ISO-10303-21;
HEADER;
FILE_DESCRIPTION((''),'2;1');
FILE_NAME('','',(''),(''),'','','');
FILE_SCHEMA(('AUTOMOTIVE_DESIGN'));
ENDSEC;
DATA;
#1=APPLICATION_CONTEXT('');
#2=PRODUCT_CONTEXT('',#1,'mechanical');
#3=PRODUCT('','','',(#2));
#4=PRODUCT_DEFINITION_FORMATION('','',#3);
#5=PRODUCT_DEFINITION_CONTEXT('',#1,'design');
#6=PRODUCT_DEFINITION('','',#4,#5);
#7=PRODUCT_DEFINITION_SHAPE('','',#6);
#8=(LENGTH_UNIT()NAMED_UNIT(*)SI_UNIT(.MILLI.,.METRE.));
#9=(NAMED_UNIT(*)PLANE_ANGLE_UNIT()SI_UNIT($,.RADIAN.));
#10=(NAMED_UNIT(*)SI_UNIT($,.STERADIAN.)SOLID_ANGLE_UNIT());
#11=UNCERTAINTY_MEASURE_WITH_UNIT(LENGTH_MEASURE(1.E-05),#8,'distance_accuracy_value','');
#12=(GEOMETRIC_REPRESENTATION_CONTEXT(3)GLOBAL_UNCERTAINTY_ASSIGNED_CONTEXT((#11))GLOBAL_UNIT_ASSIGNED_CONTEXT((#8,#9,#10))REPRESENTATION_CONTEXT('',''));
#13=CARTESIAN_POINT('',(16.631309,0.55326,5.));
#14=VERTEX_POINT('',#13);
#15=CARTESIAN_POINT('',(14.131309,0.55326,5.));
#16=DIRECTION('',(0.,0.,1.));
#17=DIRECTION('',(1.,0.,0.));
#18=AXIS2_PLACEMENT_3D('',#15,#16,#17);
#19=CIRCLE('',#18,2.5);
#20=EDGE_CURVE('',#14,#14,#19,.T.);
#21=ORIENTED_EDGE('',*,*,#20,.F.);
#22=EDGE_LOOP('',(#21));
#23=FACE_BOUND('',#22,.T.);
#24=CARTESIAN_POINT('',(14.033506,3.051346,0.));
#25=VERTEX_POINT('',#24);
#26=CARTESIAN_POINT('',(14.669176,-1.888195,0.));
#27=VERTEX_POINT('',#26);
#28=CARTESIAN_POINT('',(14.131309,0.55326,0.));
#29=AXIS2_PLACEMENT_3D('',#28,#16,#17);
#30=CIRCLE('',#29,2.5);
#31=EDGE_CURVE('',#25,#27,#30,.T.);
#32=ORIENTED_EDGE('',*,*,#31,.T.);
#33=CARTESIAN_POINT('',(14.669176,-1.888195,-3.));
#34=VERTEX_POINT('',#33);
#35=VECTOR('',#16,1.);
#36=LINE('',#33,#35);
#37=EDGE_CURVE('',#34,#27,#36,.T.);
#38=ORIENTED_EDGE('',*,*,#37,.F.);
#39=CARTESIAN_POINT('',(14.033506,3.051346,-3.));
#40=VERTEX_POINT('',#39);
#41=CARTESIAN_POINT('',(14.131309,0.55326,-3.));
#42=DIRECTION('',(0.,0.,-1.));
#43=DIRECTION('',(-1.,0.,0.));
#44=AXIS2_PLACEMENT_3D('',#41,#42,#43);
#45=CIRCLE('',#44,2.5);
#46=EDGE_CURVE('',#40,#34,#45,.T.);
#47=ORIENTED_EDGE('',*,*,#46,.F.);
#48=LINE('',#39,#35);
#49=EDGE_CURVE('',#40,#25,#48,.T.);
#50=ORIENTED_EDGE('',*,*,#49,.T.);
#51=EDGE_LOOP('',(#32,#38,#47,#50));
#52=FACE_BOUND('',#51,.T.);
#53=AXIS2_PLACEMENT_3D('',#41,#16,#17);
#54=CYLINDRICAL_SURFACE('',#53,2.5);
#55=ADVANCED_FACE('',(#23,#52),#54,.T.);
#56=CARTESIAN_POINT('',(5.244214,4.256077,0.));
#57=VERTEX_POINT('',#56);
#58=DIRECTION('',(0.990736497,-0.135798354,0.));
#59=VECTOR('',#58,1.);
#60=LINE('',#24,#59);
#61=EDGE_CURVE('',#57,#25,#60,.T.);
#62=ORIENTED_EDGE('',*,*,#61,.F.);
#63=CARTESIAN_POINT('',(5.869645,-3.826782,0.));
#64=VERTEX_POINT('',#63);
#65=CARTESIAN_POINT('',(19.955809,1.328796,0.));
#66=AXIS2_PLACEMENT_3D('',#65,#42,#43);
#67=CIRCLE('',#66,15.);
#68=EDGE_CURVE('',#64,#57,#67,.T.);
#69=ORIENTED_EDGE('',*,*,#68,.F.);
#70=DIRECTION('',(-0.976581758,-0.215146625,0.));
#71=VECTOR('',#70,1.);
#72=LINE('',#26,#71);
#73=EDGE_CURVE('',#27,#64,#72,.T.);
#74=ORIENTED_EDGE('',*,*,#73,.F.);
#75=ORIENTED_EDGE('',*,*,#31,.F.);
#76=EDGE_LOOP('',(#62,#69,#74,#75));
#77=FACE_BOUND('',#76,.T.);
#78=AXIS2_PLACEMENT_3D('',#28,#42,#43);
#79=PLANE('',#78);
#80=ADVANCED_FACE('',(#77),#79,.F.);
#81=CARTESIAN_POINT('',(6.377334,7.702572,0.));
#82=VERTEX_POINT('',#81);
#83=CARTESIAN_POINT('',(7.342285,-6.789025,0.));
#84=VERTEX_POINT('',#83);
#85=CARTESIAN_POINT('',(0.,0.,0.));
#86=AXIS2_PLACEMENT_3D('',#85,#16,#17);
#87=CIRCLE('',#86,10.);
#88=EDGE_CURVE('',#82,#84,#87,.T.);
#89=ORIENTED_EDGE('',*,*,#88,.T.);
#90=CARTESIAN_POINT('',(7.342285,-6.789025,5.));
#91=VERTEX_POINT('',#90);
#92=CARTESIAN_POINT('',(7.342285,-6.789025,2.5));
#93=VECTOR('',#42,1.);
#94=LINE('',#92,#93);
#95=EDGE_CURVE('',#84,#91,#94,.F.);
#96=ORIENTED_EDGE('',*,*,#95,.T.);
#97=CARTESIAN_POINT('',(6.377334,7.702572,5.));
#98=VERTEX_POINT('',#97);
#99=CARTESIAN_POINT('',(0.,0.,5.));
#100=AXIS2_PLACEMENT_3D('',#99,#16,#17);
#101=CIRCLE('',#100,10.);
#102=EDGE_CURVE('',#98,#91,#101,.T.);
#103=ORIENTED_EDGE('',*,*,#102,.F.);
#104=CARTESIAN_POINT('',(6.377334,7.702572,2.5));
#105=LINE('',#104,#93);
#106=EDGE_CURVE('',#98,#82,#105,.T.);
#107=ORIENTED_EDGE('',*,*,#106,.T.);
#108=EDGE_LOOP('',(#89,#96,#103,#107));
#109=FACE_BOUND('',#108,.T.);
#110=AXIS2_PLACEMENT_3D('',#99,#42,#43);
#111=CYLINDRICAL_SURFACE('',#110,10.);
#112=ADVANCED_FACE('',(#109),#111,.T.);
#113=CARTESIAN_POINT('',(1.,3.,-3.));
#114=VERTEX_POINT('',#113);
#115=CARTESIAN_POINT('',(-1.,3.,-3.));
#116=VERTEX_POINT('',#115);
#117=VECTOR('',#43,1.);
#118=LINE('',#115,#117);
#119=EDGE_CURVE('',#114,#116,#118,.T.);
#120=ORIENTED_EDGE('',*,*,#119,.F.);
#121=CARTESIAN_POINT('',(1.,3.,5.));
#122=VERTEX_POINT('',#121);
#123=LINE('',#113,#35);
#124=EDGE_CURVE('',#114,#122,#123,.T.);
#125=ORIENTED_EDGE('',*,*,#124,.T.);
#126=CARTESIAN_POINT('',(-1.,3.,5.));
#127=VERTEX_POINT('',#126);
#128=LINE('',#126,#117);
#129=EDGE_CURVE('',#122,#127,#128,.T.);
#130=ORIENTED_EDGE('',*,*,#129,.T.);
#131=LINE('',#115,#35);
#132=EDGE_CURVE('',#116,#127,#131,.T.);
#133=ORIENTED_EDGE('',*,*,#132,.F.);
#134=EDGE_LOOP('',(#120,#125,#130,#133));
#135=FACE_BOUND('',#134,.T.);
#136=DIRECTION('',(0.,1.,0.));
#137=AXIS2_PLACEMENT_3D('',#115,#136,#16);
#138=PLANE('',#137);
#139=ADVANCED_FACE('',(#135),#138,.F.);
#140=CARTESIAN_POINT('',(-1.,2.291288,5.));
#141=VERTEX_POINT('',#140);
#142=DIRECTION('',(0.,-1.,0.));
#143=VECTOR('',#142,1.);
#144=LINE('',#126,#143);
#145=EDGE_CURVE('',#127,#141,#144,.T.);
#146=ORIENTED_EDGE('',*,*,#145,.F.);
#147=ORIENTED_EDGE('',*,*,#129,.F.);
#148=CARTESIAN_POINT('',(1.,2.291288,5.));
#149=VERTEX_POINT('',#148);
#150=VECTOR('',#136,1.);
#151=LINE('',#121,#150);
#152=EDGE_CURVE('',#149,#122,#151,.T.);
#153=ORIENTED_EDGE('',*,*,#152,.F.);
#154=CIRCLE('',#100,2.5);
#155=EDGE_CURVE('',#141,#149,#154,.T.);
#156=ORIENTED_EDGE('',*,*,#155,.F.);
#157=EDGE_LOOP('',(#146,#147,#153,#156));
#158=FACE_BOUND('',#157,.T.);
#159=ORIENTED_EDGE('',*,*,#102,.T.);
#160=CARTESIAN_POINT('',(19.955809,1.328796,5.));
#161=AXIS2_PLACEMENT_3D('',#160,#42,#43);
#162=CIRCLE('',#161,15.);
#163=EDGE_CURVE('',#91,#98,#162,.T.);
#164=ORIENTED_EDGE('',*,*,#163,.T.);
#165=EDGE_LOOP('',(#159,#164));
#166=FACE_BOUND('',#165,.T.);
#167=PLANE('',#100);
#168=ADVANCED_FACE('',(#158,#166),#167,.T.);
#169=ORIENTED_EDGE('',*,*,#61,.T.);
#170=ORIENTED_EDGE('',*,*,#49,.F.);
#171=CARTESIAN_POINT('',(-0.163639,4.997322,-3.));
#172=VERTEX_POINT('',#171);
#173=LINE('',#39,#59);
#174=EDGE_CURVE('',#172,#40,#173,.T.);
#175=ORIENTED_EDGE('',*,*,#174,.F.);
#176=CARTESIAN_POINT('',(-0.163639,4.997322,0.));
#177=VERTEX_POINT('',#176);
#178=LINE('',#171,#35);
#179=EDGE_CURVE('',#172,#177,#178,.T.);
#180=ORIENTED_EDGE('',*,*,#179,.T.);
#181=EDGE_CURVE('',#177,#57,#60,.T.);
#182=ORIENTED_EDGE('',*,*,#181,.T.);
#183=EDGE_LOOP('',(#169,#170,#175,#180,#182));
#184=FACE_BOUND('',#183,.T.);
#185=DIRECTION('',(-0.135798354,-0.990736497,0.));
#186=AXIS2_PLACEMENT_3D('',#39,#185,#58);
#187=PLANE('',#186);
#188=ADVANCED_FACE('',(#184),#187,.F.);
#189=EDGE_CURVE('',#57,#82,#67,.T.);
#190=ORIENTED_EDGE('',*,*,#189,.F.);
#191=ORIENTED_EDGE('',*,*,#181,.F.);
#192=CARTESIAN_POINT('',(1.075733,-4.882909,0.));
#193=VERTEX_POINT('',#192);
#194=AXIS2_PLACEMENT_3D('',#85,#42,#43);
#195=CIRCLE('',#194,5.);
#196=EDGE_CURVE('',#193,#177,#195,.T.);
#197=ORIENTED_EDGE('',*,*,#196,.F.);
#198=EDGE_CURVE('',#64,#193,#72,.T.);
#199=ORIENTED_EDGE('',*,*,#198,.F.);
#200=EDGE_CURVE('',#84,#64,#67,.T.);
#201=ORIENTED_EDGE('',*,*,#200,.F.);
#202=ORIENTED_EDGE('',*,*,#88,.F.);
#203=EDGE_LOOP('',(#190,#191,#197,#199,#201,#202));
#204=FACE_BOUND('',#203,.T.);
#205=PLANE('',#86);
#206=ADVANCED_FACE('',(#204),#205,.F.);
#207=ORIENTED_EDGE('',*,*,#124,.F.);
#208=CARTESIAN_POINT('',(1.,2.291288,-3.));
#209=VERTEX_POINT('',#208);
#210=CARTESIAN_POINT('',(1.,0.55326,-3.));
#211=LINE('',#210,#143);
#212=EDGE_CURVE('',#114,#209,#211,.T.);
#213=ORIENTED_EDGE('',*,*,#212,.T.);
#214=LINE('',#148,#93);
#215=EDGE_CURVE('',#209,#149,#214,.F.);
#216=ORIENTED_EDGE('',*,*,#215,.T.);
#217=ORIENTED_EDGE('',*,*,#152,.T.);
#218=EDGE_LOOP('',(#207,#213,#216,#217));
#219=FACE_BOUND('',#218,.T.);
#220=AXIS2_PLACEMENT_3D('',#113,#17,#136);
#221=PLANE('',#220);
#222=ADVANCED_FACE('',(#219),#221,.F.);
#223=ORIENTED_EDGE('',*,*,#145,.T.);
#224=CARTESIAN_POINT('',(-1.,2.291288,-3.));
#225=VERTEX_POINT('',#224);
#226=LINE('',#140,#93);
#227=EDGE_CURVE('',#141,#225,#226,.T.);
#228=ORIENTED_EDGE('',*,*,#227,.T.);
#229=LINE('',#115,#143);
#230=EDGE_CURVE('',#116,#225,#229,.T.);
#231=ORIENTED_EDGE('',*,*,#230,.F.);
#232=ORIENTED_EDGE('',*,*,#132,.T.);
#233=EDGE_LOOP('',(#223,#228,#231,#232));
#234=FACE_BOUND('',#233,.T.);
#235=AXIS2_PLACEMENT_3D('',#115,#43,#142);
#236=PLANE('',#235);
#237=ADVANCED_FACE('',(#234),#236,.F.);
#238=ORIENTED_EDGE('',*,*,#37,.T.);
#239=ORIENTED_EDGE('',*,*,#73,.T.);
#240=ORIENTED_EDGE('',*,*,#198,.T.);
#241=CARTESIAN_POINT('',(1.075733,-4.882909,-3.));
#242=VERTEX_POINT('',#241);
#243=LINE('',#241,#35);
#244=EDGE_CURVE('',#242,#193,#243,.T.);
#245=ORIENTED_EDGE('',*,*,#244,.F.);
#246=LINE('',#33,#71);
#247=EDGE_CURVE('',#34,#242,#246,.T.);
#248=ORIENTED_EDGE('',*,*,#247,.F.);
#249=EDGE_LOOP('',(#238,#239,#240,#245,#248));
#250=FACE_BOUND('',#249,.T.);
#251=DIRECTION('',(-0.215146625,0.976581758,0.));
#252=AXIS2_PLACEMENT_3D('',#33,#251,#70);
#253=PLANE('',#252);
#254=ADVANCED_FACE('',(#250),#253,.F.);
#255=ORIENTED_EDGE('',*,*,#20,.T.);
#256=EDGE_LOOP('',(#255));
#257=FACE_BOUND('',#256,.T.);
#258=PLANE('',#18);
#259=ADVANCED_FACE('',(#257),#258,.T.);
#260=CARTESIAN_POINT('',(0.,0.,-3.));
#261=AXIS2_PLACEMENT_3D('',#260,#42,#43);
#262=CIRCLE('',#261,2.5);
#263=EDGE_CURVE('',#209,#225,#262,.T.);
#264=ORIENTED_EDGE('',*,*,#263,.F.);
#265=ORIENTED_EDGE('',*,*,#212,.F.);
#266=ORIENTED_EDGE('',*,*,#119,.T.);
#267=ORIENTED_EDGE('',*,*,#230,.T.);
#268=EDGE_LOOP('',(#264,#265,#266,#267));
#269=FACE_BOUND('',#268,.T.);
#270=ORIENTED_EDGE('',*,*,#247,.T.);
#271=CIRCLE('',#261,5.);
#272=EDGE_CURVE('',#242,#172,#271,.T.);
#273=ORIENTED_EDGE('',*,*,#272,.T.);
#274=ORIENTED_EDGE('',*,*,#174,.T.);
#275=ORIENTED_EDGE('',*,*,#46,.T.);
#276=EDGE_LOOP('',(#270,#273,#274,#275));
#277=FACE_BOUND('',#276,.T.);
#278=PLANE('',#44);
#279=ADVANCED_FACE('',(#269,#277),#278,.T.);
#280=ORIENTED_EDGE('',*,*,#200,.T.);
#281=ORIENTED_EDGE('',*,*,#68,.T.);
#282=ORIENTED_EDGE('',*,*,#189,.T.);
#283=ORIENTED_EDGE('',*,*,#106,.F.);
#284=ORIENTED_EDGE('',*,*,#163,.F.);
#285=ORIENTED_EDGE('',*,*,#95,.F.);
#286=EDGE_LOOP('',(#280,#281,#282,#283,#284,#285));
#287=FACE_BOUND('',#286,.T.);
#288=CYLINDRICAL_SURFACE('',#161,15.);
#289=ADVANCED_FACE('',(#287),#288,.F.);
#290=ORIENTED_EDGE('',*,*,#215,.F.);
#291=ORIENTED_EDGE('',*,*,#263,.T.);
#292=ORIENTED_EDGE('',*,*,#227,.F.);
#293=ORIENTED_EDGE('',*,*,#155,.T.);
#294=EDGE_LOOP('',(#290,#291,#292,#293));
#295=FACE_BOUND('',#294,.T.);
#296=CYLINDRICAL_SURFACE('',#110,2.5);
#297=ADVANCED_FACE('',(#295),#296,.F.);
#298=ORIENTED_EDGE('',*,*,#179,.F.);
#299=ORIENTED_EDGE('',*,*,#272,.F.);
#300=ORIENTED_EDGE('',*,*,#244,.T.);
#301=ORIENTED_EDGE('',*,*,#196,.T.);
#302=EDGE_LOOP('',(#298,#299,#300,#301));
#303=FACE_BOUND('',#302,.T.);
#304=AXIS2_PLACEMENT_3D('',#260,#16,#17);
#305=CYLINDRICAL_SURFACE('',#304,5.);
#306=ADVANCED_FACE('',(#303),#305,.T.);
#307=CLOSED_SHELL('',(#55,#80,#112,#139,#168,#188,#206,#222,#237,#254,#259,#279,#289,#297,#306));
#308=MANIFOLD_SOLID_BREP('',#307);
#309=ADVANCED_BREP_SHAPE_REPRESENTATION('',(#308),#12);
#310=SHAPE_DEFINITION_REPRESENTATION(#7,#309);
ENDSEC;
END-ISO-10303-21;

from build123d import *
from build123d.topology import SkipClean

# Parameters (mm, degrees)
SKETCH_1_R          = 10
SKETCH_1_R_2        = 2.5
EXTRUDE_1_DEPTH     = 5
SKETCH_2_R          = 15
CUT_EXTRUDE_1_DEPTH = 5
EXTRUDE_START       = 3
SKETCH_3_R          = 2.5
EXTRUDE_2_DEPTH     = 3
SKETCH_4_R          = 2.5
EXTRUDE_3_DEPTH     = 5
SKETCH_5_W          = 2
SKETCH_5_H          = 1
CUT_EXTRUDE_2_DEPTH = 21.990484753


with BuildPart() as part:
    # 草图1 → 凸台-拉伸1 (new body)
    with BuildSketch(Plane.XY):
        Circle(SKETCH_1_R)
        Circle(SKETCH_1_R_2, mode=Mode.SUBTRACT)
    extrude(amount=EXTRUDE_1_DEPTH)

    # 草图2 → 切除-拉伸1 (cut)
    with BuildSketch(Plane(origin=(0, 0, 0), x_dir=(-1, 0, 0), z_dir=(0, 0, -1))):
        with Locations((-19.955808724, 1.328795767)):
            Circle(SKETCH_2_R)
    extrude(amount=-CUT_EXTRUDE_1_DEPTH, mode=Mode.SUBTRACT)

    # 草图3 → 凸台-拉伸2 (add)
    with SkipClean():  # the faces are left unmerged after this step: merging them gives an invalid solid
        with BuildSketch(Plane(origin=(0, 0, 0), x_dir=(-1, 0, 0), z_dir=(0, 0, -1)).offset(EXTRUDE_START)):
            with BuildLine():
                Line((-14.033505879, 3.051346054), (0.163638991, 4.997321511))
                ThreePointArc((0.163638991, 4.997321511), (4.961120501, -0.622320962), (-1.075733127, -4.882908789))
                Line((-1.075733127, -4.882908789), (-14.669175898, -1.888194504))
                ThreePointArc((-14.669175898, -1.888194504), (-16.610861535, 0.872353736), (-14.033505879, 3.051346054))
            make_face()
            Circle(SKETCH_3_R, mode=Mode.SUBTRACT)
        extrude(amount=-EXTRUDE_2_DEPTH)

    # 草图4 → 凸台-拉伸3 (add)
    with SkipClean():  # the faces are left unmerged after this step: merging them gives an invalid solid
        with BuildSketch(Plane.XY):
            with Locations((14.131309334, 0.55325989)):
                Circle(SKETCH_4_R)
        extrude(amount=EXTRUDE_3_DEPTH)

    # 草图5 → 切除-拉伸2 (cut, through all)
    with SkipClean():  # the faces are left unmerged after this step: merging them gives an invalid solid
        with BuildSketch(Plane.XY.offset(5)):
            with Locations((0, 2.5)):
                Rectangle(SKETCH_5_W, SKETCH_5_H)
        extrude(amount=-CUT_EXTRUDE_2_DEPTH, mode=Mode.SUBTRACT)
    add(part.part.scale(1), mode=Mode.REPLACE)  # the faces are merged on a copy


solid = part.part
